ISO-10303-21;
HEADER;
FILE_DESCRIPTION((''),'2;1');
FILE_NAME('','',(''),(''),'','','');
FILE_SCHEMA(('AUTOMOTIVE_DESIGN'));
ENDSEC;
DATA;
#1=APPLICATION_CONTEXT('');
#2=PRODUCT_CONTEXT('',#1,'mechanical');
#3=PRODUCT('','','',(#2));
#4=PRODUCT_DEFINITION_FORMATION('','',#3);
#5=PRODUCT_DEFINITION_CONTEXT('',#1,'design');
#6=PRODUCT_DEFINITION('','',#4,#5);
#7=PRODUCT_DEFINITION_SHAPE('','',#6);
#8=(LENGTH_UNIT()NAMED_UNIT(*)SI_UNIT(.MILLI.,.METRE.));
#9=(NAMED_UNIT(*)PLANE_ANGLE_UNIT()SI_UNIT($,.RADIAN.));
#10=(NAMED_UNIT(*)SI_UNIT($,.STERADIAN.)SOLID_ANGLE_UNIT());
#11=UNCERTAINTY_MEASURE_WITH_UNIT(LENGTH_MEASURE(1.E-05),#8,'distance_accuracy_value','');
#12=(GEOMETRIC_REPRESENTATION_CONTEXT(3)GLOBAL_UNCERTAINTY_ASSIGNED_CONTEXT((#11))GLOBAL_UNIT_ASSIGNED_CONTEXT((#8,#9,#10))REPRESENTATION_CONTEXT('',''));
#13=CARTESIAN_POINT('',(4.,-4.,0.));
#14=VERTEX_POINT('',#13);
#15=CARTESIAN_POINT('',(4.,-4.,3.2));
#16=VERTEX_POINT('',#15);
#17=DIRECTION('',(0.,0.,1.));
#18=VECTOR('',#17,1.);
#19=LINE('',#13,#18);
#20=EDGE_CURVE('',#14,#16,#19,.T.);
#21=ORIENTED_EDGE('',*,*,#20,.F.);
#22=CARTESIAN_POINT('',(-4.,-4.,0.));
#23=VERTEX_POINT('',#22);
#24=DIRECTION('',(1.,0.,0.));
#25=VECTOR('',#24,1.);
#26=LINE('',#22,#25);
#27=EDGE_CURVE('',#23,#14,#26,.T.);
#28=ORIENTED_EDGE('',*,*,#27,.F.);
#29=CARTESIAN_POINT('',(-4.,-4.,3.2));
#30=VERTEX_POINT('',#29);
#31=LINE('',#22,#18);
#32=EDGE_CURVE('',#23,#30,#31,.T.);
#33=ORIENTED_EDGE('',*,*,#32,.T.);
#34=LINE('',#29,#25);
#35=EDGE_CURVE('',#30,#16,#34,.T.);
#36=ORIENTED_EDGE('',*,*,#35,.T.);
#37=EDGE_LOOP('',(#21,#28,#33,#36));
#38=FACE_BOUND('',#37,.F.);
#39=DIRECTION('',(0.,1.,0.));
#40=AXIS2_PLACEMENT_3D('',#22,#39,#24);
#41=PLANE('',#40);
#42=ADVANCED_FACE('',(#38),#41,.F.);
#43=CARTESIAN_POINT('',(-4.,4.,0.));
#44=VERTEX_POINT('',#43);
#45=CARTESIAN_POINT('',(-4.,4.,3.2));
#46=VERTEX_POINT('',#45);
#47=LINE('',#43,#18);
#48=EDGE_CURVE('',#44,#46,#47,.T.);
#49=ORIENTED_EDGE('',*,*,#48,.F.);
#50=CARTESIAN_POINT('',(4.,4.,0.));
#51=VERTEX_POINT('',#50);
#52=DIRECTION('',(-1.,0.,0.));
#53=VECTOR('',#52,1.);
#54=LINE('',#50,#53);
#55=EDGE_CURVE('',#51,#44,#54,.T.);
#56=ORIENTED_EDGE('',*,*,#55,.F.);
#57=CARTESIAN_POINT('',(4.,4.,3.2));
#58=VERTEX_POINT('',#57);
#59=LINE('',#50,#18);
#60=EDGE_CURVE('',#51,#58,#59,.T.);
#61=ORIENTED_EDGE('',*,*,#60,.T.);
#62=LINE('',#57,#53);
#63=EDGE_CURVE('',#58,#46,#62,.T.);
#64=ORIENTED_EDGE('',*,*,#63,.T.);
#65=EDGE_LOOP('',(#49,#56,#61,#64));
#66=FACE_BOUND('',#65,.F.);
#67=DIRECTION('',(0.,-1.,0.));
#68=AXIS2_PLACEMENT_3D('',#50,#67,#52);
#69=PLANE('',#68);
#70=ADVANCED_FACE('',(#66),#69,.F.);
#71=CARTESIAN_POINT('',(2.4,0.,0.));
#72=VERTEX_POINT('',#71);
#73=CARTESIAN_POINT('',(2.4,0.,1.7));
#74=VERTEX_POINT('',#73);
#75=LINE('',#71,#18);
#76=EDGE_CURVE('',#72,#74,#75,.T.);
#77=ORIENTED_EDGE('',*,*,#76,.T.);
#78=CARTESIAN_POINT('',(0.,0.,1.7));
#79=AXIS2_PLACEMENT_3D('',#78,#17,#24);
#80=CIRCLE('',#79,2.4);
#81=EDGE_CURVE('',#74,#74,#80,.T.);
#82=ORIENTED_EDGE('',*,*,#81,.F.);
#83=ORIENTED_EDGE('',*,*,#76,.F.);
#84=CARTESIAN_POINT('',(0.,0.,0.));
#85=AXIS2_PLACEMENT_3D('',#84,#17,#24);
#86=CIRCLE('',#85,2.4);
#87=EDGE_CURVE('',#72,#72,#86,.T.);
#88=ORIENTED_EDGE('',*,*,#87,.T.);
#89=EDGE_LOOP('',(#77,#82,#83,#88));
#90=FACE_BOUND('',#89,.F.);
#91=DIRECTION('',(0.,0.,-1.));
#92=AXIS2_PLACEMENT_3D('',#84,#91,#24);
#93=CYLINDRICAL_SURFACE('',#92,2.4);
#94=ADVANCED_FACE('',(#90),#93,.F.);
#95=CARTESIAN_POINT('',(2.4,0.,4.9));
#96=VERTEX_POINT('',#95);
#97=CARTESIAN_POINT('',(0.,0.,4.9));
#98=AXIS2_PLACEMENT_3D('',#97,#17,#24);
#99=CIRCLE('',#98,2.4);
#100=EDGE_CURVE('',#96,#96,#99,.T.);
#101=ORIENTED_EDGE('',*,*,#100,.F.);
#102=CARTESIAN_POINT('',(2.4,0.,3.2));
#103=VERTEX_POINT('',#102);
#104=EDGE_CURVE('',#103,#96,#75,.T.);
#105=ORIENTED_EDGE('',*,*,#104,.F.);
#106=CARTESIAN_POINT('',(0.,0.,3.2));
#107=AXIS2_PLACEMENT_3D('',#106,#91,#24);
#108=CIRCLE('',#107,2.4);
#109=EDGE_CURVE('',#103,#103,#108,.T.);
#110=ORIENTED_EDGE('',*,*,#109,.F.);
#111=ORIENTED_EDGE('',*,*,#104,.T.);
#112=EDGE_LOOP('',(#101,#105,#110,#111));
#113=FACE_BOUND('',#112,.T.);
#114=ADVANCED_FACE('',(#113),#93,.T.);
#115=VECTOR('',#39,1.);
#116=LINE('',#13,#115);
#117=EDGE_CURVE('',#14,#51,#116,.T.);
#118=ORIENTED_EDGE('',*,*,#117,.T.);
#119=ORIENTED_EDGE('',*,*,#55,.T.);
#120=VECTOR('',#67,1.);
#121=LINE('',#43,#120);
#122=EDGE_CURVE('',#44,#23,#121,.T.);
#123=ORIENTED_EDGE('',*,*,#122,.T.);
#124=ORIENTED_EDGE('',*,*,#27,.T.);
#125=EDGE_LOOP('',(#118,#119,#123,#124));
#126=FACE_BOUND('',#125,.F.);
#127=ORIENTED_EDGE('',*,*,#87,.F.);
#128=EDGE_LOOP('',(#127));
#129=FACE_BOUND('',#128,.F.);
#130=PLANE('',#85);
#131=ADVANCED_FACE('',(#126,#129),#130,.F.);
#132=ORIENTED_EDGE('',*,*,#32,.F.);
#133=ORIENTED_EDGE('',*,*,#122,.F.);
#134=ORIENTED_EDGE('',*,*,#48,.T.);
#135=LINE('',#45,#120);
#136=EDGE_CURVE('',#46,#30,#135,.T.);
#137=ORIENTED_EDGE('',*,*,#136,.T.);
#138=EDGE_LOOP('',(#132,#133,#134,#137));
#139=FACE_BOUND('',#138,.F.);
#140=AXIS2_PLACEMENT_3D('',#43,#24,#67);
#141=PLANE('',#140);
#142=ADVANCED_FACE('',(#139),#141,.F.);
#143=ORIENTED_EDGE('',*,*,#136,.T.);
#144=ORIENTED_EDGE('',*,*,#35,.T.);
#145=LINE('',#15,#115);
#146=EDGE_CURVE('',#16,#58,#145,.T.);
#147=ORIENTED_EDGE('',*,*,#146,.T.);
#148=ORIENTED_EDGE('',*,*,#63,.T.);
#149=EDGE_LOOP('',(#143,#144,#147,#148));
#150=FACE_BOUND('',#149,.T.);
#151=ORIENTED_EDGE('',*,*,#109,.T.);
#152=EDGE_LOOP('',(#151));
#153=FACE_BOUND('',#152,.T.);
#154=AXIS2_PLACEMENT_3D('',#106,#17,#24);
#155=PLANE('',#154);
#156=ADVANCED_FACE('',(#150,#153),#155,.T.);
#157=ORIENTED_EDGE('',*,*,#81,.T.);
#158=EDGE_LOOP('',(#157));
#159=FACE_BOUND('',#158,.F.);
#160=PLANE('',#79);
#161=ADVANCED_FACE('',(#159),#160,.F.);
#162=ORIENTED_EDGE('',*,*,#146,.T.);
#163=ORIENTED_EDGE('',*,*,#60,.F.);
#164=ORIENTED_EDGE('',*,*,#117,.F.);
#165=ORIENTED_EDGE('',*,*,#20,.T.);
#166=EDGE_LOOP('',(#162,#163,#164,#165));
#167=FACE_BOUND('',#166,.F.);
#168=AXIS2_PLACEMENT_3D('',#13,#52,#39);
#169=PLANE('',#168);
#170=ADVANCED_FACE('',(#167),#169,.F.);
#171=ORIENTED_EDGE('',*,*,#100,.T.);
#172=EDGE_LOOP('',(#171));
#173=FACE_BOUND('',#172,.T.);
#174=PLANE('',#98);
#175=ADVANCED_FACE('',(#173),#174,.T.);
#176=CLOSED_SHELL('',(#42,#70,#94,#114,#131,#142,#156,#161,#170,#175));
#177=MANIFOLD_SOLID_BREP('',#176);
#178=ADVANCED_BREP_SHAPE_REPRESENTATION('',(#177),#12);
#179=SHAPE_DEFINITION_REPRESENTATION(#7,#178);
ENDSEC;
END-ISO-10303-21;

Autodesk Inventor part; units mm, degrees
ref_plane "YZ Plane" through (0, 0, 0) normal (1, 0, 0) x (0, 1, 0)
ref_plane "XZ Plane" through (0, 0, 0) normal (0, 1, 0) x (-1, 0, 0)
ref_plane "XY Plane" through (0, 0, 0) normal (0, 0, 1) x (1, 0, 0)
sketch "Sketch1" plane through (0, 0, 0) normal (0, 0, 1) x (1, 0, 0)
  line L0 (-4, -4) -> (4, -4)
  line L1 (4, -4) -> (4, 4)
  line L2 (4, 4) -> (-4, 4)
  line L3 (-4, 4) -> (-4, -4)
  line L4 (-4, -4) -> (4, 4) construction
  line L5 (4, -4) -> (-4, 4) construction
  circle A0 centre (0, 0) radius 2.4
  dimension "d0" = 8
  dimension "d1" = 8
  dimension "d2" = 4.8
extrude "Extrusion1" add sketch "Sketch1" along normal blind 3.2 contours L3 L2 L1 L0 | A0
extrude "Extrusion2" add sketch "Sketch1" along normal blind 4.9 contours A0
extrude "Extrusion3" cut sketch "Sketch1" along normal blind 1.7 contours A0
pattern_of_one "Rectangular Pattern1"
equation "\"d11\" = d0"
equation "\"d24\" = d0"
properties part number "LEGO Stud 1x1 Transparent Dark Blue"
